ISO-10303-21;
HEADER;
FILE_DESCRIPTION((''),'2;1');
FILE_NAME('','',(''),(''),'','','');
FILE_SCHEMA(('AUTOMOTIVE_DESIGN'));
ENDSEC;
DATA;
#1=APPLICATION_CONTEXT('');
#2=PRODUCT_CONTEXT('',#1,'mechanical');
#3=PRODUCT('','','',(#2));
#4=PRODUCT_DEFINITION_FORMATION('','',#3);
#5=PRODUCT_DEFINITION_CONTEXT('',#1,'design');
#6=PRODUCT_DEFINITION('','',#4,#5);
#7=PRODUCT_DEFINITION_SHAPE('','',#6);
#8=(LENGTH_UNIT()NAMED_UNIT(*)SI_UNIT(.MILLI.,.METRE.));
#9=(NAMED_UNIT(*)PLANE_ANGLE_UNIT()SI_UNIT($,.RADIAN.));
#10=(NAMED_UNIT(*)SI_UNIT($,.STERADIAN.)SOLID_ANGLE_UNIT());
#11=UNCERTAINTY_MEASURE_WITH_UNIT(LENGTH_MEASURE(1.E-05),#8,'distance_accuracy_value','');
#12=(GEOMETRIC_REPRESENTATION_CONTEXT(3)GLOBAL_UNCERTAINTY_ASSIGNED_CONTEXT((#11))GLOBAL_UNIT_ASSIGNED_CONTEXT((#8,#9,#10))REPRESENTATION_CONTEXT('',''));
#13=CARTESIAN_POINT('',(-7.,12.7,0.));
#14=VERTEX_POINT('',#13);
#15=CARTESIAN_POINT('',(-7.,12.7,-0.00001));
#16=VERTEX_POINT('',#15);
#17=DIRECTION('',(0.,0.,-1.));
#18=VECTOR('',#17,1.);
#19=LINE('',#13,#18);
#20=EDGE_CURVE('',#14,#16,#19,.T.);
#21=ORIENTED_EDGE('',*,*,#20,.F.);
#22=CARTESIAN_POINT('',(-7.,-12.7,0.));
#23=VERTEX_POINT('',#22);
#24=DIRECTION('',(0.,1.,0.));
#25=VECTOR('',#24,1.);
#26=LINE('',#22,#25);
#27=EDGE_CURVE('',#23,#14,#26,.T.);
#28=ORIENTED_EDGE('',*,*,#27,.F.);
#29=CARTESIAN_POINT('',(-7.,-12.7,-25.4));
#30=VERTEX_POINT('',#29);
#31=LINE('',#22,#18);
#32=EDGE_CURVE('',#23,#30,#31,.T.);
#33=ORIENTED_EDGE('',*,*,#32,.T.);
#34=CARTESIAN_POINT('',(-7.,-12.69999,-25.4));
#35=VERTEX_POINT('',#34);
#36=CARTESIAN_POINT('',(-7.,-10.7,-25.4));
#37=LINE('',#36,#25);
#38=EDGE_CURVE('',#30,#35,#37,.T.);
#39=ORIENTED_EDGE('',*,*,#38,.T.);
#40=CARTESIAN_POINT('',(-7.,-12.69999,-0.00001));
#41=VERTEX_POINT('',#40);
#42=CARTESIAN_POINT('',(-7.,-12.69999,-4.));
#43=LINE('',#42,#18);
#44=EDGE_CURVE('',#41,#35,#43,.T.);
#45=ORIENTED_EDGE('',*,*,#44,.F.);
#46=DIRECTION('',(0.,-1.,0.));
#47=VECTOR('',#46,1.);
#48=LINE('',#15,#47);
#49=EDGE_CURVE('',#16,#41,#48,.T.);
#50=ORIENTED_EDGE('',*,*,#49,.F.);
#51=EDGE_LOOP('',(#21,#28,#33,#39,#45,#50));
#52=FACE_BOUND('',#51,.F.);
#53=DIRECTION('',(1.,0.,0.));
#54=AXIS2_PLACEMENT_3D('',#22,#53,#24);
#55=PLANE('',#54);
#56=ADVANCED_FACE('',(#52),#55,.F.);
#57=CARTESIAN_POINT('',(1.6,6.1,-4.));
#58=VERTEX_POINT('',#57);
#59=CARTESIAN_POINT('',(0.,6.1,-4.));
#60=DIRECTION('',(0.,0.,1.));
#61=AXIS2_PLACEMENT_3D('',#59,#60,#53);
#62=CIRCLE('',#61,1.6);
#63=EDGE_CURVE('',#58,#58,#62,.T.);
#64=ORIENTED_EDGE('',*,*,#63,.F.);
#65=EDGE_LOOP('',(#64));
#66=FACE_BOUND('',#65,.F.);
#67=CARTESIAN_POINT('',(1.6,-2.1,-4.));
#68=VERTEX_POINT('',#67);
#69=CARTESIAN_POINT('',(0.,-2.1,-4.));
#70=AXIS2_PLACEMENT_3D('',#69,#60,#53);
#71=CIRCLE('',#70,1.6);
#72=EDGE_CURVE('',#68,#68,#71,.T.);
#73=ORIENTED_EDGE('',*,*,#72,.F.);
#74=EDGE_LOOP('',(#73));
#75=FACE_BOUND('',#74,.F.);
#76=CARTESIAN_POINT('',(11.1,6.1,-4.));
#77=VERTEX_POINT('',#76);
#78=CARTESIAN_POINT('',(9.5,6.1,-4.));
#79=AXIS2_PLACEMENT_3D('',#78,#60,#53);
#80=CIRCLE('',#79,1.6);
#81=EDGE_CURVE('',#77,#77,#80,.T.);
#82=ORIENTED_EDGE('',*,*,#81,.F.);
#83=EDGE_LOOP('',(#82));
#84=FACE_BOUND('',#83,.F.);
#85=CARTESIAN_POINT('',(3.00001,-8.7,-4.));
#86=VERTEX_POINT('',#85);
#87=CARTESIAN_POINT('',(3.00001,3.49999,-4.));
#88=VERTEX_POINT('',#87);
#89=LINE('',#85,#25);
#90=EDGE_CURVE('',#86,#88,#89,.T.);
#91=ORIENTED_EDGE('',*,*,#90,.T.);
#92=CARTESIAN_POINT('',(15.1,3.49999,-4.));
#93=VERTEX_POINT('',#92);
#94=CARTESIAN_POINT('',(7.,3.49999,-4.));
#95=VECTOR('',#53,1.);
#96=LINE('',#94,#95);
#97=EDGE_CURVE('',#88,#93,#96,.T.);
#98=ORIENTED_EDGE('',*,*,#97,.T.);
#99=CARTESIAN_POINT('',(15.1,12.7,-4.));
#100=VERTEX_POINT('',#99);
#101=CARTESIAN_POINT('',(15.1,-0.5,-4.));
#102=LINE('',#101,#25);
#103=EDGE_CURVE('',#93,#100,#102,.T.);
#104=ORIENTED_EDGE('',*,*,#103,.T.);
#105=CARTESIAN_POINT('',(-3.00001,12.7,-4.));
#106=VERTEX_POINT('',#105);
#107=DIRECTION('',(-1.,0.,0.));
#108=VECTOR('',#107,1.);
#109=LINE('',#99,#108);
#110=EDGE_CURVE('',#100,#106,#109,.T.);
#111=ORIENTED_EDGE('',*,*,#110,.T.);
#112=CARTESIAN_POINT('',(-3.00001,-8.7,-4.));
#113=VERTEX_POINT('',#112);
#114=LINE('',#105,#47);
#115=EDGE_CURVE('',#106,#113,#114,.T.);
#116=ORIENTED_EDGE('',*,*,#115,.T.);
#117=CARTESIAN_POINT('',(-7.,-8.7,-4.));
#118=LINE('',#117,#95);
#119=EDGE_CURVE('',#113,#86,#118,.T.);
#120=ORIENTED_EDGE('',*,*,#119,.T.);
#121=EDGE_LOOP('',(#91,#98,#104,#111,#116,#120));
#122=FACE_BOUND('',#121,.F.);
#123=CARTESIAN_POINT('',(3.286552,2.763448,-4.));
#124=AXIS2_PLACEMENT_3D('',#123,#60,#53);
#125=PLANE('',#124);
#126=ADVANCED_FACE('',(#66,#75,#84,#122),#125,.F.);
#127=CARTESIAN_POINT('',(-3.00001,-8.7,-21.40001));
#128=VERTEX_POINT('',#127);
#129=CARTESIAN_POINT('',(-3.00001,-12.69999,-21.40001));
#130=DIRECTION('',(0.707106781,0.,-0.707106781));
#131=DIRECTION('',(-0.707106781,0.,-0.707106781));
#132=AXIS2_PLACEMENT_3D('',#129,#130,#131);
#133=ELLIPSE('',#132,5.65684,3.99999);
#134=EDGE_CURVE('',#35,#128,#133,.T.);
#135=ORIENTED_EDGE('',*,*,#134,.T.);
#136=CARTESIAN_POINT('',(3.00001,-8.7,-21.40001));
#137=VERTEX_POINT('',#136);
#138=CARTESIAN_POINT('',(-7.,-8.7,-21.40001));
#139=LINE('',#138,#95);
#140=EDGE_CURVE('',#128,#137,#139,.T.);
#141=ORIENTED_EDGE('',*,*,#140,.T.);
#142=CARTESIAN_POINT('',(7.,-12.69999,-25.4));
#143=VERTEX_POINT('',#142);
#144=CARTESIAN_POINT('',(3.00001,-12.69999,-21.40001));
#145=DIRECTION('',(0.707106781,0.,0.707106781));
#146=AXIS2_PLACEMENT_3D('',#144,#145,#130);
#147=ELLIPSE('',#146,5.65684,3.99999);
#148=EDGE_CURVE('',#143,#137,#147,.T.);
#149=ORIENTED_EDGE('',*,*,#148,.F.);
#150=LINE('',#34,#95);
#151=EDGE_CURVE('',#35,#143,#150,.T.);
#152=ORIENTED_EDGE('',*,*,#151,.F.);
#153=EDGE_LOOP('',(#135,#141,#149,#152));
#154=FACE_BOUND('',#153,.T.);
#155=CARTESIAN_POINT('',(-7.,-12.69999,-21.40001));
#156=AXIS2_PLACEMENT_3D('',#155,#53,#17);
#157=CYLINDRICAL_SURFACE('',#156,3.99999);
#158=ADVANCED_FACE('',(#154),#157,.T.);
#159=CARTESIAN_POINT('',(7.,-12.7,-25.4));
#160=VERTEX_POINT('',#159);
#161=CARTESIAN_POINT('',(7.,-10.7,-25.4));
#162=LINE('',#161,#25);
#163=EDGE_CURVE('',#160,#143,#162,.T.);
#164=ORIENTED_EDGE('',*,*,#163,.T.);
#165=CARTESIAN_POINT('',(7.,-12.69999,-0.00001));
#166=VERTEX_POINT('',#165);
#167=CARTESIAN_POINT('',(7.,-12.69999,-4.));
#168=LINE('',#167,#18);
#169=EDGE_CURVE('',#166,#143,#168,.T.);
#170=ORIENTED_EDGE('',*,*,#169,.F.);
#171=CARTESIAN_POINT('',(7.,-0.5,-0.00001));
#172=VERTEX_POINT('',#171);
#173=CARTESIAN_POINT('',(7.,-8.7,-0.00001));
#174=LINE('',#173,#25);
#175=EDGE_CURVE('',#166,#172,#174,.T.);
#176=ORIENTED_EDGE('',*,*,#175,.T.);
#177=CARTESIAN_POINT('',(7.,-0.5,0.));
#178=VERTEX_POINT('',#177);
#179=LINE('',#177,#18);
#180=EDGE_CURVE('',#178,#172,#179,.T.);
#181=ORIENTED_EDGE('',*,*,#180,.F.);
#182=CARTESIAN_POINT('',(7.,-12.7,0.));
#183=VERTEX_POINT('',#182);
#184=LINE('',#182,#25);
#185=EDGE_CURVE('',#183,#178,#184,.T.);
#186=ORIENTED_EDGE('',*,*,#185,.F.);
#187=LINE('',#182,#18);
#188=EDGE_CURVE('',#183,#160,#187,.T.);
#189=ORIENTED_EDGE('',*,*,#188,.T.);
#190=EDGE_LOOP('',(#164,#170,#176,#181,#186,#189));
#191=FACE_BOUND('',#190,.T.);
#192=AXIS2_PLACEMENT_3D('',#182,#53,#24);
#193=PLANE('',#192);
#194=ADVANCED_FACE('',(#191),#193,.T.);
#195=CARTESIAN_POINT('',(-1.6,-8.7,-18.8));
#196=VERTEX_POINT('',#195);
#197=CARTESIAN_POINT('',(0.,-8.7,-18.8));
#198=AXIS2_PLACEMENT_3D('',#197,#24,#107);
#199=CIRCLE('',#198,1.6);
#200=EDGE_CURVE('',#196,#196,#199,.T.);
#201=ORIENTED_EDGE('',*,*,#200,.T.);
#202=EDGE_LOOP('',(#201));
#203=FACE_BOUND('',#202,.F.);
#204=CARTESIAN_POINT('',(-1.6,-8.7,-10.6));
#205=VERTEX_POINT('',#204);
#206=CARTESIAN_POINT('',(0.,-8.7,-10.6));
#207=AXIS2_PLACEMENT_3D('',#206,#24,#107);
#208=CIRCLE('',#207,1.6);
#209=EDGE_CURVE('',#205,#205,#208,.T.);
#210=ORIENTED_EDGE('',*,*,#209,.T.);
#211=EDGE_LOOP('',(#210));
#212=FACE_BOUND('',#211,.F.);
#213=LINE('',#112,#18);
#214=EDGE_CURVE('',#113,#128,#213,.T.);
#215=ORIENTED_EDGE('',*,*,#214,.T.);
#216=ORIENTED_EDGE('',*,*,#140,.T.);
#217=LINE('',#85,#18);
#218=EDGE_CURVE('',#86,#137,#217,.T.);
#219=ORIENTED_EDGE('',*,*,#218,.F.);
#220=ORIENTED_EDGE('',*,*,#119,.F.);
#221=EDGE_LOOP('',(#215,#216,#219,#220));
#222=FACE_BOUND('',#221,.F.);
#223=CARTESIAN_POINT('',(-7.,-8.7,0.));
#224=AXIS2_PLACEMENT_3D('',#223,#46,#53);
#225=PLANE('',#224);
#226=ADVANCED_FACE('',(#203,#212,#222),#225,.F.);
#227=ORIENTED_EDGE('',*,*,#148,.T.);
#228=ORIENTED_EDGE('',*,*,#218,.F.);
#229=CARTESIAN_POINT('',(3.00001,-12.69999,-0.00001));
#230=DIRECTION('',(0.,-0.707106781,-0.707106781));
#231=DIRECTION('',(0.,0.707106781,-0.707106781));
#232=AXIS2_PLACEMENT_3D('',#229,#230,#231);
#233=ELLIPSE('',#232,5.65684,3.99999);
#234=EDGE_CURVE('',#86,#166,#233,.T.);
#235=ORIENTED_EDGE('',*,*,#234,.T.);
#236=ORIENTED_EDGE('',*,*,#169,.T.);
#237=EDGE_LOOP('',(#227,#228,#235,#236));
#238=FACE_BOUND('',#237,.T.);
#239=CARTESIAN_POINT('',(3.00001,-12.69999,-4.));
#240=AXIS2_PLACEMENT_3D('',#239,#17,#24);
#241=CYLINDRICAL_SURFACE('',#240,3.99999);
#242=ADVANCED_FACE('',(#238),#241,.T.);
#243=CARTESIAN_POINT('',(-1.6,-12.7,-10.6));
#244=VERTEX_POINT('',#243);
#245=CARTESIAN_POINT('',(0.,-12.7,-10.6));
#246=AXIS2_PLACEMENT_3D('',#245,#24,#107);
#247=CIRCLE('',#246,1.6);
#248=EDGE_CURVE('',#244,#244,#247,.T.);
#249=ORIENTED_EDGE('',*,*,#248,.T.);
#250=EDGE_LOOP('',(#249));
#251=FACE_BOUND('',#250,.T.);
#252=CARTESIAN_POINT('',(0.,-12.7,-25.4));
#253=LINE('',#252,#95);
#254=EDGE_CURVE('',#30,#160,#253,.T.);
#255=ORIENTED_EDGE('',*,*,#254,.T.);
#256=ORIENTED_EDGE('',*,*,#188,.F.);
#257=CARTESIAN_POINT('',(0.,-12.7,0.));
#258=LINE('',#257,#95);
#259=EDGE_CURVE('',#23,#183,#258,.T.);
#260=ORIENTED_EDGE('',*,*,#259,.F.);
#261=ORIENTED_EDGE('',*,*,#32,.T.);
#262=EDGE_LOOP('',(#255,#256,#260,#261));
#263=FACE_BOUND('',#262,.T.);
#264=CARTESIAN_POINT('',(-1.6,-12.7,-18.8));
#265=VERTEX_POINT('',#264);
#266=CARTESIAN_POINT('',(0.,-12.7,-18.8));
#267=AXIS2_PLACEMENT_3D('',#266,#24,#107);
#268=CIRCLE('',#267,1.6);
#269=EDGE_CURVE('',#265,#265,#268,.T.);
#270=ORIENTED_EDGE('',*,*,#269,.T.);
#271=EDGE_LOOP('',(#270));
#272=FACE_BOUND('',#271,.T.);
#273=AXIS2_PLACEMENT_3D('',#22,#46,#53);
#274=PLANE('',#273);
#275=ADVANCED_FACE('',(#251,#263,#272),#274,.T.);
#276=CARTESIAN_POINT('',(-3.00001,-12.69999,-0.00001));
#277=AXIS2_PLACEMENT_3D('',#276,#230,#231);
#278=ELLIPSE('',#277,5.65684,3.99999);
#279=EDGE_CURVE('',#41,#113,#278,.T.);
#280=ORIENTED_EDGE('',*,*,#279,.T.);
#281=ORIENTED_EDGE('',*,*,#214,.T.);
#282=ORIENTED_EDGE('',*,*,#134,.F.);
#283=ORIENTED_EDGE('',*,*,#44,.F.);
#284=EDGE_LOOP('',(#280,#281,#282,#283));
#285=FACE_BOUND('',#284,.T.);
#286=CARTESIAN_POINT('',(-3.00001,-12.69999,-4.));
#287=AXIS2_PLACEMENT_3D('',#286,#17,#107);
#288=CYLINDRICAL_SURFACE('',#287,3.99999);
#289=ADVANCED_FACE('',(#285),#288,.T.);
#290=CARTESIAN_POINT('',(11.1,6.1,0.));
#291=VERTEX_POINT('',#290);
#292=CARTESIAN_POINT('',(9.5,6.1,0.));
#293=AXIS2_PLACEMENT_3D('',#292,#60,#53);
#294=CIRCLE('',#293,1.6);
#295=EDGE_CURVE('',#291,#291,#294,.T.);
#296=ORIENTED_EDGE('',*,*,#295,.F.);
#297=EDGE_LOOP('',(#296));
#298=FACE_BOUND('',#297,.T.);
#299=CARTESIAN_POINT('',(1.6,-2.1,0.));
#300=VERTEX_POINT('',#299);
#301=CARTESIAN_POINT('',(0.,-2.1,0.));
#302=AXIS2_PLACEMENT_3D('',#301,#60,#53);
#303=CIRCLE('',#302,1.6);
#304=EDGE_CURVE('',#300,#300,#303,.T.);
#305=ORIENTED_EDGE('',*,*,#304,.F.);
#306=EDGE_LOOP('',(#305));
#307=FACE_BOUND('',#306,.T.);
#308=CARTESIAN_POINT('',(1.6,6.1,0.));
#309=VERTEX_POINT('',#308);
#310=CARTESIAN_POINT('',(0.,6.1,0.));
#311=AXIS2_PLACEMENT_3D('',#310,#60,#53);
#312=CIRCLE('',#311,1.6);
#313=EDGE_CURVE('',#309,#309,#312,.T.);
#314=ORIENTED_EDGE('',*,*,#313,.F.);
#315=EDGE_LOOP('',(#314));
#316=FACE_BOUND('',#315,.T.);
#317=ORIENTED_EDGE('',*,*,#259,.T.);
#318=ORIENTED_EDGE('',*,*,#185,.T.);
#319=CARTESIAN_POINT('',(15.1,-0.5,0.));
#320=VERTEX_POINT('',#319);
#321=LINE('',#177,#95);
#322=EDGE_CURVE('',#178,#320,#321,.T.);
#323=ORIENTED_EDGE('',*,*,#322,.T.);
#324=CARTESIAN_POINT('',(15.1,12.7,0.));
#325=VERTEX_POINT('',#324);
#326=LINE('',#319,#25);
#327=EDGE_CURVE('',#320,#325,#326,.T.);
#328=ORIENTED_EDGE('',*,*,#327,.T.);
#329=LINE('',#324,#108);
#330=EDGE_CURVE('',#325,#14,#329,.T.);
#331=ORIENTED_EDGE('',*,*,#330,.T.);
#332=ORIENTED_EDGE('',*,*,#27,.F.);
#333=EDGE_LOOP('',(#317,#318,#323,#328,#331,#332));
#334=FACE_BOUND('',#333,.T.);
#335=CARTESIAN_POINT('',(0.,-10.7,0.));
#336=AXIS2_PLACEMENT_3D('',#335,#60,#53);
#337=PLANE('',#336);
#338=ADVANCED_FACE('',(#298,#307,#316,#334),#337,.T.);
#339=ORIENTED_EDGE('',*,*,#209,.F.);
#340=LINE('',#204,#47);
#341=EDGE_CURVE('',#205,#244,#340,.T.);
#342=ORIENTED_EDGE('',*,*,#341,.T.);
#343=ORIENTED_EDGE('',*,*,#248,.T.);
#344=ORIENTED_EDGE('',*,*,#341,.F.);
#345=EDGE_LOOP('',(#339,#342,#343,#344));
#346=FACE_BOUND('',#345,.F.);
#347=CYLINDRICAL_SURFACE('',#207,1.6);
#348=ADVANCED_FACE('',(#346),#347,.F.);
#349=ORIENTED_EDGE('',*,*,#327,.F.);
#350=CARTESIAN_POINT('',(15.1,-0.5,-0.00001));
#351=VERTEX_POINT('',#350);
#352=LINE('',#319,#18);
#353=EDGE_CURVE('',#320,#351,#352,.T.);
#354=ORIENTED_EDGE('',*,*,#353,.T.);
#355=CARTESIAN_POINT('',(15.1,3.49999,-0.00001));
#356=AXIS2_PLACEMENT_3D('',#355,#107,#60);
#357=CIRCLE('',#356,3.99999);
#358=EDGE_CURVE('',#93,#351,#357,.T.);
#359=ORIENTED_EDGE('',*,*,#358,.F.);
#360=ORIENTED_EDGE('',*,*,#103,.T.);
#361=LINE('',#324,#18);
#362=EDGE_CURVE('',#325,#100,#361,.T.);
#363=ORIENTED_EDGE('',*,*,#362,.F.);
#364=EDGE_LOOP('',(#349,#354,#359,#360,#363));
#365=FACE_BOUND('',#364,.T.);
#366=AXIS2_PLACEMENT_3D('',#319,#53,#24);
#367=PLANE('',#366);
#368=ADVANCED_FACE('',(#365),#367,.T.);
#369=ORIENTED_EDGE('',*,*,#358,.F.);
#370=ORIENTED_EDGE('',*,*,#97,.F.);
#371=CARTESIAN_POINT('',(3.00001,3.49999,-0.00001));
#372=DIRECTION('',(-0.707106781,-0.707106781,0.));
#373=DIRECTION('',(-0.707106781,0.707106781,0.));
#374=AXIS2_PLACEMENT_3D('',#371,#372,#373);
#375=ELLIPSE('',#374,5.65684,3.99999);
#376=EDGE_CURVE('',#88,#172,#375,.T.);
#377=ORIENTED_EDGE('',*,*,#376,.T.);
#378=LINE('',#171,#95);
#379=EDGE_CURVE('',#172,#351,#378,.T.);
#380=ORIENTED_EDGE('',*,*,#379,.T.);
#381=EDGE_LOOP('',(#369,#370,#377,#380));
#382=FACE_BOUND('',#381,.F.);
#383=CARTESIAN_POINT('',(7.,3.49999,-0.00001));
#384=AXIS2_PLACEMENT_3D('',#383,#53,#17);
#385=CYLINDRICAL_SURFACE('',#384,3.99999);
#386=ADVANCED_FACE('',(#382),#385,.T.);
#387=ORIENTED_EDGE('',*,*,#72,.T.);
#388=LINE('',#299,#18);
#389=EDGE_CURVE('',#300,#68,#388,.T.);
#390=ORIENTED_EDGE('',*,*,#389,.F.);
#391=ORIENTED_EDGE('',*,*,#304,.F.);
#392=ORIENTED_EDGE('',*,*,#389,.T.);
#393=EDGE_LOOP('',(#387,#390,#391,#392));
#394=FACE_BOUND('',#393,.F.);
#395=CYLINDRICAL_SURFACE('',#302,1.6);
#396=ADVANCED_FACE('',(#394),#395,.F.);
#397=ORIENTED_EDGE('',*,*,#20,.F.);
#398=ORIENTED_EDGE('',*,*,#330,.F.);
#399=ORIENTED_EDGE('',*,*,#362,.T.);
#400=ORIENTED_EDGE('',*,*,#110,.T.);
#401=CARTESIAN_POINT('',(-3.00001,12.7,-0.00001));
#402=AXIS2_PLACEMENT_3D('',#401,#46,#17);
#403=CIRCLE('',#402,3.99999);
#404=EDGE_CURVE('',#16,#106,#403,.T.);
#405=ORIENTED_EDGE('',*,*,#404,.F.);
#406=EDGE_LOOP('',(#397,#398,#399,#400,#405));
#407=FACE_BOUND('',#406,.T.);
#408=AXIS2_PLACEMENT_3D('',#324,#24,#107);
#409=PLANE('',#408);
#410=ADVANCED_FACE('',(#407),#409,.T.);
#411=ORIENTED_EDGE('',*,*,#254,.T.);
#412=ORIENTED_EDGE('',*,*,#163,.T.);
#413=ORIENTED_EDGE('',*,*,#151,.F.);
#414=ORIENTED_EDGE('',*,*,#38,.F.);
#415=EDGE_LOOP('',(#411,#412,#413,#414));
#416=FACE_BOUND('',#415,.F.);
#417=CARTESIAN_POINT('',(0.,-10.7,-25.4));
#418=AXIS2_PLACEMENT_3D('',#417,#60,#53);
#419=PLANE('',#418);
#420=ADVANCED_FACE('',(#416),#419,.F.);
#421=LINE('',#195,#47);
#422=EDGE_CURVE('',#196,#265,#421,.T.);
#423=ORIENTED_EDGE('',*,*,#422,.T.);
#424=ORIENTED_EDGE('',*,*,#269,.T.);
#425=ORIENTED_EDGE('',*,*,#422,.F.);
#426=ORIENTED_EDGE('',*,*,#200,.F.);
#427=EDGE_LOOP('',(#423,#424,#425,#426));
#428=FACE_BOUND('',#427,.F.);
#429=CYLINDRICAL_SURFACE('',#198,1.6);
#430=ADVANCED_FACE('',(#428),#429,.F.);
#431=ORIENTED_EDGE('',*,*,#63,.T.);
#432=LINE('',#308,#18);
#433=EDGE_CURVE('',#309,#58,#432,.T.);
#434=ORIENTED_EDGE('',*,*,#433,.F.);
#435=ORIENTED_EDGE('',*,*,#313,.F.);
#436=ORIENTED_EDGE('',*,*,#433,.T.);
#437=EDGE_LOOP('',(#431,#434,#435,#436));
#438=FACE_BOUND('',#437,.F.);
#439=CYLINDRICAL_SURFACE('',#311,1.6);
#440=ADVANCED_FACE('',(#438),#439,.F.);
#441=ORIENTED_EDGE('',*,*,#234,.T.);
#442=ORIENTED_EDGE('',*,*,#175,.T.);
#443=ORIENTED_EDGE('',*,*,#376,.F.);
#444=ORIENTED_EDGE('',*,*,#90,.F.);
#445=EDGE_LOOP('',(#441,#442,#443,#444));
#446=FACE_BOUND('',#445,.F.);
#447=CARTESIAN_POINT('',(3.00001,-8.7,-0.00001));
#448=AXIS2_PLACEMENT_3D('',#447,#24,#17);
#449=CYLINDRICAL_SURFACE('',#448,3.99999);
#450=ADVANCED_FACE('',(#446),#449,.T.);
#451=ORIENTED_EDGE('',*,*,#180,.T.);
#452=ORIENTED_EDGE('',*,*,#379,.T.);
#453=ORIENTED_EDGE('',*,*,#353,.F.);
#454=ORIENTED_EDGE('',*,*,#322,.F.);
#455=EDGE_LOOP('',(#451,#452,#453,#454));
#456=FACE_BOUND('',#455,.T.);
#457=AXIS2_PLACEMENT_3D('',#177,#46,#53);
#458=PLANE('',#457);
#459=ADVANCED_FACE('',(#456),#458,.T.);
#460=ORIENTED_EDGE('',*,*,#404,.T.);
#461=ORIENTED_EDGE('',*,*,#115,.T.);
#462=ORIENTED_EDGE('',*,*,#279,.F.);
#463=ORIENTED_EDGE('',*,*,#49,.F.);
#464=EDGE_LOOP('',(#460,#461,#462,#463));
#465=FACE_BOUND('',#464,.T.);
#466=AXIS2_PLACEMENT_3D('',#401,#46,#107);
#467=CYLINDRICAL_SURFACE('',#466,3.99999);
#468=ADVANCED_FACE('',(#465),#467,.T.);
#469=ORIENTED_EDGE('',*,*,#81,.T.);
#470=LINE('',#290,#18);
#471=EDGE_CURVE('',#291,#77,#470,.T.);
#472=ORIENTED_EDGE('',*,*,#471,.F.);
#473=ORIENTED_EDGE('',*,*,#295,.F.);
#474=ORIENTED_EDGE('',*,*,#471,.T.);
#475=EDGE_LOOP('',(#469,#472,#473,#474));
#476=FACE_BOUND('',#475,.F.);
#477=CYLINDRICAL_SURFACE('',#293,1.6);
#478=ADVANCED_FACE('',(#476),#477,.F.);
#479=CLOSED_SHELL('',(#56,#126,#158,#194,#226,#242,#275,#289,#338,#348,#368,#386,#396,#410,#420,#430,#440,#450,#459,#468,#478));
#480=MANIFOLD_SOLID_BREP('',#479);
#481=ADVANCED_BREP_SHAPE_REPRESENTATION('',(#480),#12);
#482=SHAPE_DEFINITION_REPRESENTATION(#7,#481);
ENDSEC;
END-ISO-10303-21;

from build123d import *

# Parameters (mm, degrees)
F0_R     = 1.6
F1_DEPTH = 4
F0_W     = 14
F0_H     = 4
F2_DEPTH = 25.4
F3_R     = 1.6
F4_DEPTH = 4
F5_R     = 3.99999


# Not quite as in the source:
# - a fillet or chamfer is up to 0.001 mm smaller than in the source, because OpenCascade refuses the exact size


with BuildPart() as f1:
    # F0 (on Top) → F1 (new body)
    with BuildSketch(Plane.XY):
        Polygon((7, 12.7), (-7, 12.7), (-7, -8.7), (7, -8.7), (7, -0.5), (15.1, -0.5), (15.1, 12.7), align=None)
        with Locations((0, -2.1)):
            Circle(F0_R, mode=Mode.SUBTRACT)
        with Locations((0, 6.1)):
            Circle(F0_R, mode=Mode.SUBTRACT)
        with Locations((9.5, 6.1)):
            Circle(F0_R, mode=Mode.SUBTRACT)
    extrude(amount=-F1_DEPTH)

    # F0 (on Top) → F2 (join)
    with BuildSketch(Plane.XY):
        with Locations((0, -10.7)):
            Rectangle(F0_W, F0_H)
    extrude(amount=-F2_DEPTH)

    # F3 (on face) → F4 (cut, through all)
    with BuildSketch(Plane(origin=(0, -8.7, 0), x_dir=(-1, 0, 0), z_dir=(0, 1, 0))):
        with Locations((0, -10.6)):
            Circle(F3_R)
        with Locations((0, -18.8)):
            Circle(F3_R)
    extrude(amount=-F4_DEPTH, mode=Mode.SUBTRACT)

    # F5 (radius 4 in the source; OpenCascade refuses exactly that, so slightly less here)
    f5_edges = [f1.edges().sort_by_distance(p)[0] for p in [
        (-7, -8.7, -14.7),
        (0, -8.7, -25.4),
        (7, -8.7, -14.7),
        (-7, 2, -4),
        (7, -4.6, -4),
        (11.05, -0.5, -4),
    ]]
    fillet(f5_edges, radius=F5_R)


solid = f1.part
